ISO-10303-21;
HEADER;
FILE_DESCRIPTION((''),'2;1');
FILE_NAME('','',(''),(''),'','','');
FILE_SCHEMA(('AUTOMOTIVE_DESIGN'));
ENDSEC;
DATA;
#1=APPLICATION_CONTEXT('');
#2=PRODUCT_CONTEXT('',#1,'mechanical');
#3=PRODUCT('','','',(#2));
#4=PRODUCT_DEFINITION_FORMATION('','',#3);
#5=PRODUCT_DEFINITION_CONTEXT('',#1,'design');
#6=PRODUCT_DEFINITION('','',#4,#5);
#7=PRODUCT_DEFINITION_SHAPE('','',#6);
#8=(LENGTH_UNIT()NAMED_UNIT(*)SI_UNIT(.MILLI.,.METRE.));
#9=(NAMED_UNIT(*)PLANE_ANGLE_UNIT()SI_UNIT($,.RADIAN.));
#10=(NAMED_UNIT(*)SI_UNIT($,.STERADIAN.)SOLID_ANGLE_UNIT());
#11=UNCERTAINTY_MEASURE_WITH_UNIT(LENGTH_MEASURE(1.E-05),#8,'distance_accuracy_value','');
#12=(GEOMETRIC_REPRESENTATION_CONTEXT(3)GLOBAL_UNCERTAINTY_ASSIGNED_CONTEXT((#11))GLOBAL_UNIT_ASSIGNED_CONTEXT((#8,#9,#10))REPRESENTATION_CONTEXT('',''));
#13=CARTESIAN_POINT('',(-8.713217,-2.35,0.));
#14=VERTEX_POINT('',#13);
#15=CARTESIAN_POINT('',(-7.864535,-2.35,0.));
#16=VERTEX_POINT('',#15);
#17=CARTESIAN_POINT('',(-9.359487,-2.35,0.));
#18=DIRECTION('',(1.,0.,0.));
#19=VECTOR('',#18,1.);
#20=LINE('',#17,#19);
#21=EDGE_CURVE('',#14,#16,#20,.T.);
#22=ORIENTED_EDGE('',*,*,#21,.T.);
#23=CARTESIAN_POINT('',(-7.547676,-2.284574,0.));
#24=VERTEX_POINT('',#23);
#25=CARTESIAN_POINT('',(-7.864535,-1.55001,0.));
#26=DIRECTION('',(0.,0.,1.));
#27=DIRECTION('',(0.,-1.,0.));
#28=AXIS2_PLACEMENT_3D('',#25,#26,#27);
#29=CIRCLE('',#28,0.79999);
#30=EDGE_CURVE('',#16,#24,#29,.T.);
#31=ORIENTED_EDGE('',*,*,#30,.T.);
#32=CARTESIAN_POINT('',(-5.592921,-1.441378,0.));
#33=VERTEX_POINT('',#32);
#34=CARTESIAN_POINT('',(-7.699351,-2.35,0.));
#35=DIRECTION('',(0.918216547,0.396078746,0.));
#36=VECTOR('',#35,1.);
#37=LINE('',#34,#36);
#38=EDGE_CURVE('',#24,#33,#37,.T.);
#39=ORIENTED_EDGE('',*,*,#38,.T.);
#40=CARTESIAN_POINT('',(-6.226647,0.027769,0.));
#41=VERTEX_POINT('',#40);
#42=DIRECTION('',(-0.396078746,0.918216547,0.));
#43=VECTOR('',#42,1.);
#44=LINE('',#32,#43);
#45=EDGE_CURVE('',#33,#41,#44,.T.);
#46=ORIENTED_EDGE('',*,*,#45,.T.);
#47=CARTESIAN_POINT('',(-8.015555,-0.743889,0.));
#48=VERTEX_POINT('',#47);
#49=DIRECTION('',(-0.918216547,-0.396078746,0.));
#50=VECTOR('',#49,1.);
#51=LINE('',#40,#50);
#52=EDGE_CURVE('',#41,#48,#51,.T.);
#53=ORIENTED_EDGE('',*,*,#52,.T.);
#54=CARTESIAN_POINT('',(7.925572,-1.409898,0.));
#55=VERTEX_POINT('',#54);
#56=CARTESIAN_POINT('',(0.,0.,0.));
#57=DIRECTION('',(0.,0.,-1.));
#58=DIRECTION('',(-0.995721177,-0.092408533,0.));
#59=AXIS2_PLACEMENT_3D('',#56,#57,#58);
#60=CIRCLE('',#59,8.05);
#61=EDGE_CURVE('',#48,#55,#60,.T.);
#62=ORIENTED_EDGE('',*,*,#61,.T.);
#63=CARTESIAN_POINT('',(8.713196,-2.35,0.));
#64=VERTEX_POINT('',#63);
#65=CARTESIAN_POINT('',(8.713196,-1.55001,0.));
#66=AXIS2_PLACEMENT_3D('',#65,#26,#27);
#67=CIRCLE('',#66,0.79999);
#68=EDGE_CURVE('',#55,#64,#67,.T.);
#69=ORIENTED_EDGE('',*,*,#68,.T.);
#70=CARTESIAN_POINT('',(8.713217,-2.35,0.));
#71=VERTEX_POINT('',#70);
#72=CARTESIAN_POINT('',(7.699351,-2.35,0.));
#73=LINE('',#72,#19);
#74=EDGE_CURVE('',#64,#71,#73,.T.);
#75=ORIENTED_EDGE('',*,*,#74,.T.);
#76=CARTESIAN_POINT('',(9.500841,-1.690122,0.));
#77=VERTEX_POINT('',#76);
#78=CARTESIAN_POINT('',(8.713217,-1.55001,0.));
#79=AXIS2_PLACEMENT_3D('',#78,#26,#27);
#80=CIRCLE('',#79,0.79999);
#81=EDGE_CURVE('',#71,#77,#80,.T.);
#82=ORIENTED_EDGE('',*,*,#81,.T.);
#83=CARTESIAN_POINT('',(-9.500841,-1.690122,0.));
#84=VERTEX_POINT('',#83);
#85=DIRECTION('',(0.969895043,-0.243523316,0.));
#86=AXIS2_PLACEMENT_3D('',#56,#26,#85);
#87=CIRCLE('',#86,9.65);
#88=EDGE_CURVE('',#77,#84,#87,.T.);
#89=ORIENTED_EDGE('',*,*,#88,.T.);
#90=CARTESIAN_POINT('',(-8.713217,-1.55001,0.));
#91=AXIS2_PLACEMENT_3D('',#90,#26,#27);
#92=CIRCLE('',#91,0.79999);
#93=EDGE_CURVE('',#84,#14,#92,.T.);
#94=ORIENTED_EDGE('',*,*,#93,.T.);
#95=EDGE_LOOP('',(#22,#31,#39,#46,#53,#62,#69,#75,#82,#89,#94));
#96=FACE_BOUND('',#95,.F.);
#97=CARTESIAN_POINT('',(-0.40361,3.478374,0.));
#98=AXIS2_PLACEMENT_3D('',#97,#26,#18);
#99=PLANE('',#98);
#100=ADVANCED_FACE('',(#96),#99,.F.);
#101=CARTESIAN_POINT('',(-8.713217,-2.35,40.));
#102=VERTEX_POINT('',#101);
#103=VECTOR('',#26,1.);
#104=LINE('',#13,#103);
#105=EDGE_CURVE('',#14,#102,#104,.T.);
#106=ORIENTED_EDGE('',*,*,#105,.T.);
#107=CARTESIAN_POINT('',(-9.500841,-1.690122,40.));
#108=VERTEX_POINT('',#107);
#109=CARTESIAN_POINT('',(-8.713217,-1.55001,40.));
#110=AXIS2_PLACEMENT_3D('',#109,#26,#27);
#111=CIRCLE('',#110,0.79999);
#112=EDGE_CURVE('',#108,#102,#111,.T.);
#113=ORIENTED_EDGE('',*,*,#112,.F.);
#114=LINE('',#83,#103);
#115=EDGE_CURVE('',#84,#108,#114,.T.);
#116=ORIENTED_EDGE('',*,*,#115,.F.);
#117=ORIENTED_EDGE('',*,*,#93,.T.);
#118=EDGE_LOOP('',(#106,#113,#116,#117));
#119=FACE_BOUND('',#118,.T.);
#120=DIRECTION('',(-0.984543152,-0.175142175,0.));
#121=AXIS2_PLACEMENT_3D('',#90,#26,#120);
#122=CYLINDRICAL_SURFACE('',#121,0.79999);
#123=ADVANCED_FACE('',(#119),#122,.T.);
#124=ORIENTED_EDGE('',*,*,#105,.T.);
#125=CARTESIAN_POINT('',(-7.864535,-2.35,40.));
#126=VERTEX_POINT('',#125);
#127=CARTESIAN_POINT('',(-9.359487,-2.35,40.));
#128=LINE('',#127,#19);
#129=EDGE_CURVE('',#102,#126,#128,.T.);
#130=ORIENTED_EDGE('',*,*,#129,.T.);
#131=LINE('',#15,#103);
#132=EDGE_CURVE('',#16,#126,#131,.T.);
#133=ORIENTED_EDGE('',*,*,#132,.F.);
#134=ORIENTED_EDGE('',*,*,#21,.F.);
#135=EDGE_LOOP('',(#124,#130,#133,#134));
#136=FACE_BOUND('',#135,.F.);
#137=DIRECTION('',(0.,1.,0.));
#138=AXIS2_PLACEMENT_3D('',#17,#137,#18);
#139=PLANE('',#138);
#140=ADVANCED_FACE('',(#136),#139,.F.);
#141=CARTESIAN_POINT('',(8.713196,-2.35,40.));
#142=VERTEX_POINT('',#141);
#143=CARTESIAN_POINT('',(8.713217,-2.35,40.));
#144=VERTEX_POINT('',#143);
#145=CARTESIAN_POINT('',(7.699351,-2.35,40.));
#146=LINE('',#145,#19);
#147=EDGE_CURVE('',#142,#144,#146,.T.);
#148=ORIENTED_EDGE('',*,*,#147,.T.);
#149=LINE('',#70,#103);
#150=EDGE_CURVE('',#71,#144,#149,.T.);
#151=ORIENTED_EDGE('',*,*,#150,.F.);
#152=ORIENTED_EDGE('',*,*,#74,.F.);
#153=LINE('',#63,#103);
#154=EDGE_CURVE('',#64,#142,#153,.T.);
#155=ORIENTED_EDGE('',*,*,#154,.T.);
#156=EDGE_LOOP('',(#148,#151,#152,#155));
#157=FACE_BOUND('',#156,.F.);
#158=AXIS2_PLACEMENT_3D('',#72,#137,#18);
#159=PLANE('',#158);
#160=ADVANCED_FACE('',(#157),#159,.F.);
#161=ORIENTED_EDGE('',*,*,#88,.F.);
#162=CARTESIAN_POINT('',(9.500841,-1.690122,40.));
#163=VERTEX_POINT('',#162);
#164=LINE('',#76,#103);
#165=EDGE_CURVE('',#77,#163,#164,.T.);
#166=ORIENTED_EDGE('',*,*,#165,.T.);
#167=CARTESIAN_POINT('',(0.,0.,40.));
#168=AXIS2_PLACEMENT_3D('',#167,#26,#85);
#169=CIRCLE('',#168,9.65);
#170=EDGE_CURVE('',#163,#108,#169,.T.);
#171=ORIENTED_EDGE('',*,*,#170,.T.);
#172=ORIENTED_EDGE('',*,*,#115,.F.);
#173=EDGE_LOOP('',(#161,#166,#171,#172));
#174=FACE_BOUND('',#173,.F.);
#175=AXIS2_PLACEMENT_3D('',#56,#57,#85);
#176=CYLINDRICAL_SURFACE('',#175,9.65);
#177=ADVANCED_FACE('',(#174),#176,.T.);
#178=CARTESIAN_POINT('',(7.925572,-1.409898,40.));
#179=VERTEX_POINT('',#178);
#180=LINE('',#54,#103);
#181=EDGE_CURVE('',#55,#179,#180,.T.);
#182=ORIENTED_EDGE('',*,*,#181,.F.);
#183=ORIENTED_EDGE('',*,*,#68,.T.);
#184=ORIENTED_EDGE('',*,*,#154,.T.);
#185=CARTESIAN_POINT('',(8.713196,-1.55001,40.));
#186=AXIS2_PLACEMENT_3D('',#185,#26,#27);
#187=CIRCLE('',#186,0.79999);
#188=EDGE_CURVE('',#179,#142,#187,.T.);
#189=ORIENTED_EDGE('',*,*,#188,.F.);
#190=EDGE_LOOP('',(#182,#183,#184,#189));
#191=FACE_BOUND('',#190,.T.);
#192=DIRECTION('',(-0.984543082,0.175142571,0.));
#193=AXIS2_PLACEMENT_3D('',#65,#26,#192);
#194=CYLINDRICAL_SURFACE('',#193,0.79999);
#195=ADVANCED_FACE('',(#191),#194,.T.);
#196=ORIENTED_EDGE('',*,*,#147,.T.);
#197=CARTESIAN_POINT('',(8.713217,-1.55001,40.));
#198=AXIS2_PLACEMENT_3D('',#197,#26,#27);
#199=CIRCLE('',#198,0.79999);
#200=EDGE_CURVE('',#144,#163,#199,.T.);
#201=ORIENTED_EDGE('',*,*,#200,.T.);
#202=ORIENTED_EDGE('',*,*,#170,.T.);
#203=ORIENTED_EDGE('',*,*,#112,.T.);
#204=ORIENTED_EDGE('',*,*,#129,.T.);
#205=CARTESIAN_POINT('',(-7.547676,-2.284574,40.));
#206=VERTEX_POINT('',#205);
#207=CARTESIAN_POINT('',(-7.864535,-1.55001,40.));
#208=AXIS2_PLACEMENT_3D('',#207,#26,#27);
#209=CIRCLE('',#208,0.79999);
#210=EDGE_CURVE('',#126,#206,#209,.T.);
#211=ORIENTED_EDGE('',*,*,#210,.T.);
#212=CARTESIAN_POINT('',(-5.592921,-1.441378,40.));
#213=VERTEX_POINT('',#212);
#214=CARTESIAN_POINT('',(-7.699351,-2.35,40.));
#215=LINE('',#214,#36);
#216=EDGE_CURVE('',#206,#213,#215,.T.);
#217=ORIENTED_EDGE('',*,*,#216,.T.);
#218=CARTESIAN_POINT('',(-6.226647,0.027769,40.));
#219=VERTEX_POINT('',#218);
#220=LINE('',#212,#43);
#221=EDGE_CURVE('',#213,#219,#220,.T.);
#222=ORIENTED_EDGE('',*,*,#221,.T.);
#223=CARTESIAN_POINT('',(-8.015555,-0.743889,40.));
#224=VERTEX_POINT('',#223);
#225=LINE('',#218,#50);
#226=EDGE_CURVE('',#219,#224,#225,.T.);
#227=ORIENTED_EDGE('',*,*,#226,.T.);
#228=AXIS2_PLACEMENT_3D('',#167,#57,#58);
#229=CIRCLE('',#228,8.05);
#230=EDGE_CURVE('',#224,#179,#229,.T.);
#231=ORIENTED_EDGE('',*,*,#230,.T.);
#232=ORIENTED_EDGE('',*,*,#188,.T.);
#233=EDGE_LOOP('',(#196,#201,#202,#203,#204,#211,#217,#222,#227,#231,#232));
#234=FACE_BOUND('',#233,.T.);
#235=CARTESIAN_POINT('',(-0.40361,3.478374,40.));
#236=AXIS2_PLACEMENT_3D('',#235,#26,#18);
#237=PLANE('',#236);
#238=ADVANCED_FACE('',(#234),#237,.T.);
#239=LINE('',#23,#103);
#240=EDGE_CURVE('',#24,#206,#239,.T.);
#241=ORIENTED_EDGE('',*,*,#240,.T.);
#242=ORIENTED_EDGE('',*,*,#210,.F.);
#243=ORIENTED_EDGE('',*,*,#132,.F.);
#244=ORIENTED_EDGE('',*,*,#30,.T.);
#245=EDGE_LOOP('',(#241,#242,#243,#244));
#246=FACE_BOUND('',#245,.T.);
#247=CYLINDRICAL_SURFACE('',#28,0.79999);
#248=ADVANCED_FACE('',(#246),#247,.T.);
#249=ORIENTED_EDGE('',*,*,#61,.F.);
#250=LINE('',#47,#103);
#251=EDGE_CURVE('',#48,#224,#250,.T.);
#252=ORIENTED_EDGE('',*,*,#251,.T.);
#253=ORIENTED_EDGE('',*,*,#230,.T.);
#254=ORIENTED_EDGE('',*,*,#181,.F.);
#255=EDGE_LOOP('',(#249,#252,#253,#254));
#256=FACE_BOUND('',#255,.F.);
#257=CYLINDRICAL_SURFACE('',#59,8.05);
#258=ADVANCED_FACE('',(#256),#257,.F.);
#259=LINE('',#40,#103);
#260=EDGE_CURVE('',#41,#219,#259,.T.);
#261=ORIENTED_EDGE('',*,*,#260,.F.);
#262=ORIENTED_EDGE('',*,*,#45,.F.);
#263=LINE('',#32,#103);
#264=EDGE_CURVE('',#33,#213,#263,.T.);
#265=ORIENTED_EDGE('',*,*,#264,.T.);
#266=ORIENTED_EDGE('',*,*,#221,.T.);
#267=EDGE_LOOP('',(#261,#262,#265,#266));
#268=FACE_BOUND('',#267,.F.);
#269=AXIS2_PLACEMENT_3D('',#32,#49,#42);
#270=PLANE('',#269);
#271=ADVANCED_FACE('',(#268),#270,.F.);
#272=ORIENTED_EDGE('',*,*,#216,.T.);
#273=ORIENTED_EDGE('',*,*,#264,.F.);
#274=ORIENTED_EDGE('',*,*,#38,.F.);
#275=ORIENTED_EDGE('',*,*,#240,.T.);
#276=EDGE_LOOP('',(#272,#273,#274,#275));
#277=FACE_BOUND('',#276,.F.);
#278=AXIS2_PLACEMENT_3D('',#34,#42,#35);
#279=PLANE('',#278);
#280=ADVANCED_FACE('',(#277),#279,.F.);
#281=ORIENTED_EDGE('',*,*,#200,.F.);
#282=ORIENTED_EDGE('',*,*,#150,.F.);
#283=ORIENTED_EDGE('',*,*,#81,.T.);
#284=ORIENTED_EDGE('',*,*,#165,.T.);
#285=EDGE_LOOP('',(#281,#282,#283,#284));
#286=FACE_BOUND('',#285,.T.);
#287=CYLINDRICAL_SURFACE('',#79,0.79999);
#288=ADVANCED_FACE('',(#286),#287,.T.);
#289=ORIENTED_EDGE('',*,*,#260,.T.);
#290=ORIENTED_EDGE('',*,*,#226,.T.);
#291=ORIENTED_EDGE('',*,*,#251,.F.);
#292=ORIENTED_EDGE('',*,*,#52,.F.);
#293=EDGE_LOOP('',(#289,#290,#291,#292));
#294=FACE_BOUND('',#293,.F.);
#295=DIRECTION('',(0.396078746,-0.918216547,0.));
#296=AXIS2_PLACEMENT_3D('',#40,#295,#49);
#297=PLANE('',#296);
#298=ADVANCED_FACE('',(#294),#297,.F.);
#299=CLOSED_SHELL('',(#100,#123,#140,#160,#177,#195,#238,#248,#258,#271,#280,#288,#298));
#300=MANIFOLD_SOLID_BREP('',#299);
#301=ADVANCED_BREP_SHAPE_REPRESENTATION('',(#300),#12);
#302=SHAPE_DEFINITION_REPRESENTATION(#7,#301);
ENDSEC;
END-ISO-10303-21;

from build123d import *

# Parameters (mm, degrees)
F1_DEPTH = 40
F2_R     = 0.79999


# Not quite as in the source:
# - a fillet or chamfer is up to 0.001 mm smaller than in the source, because OpenCascade refuses the exact size


with BuildPart() as f1:
    # F0 (on Top) → F1 (new body)
    with BuildSketch(Plane.XY):
        with BuildLine():
            ThreePointArc((-8.0155554774, -0.7438886939), (0.8184709888, 8.008283539), (7.699350622, -2.35))
            Line((7.699350622, -2.35), (9.3594871654, -2.35))
            ThreePointArc((9.3594871654, -2.35), (0, 9.65), (-9.3594871654, -2.35))
            Line((-9.3594871654, -2.35), (-7.699350622, -2.35))
            Line((-7.699350622, -2.35), (-5.5929206907, -1.4413775962))
            Line((-5.5929206907, -1.4413775962), (-6.2266466845, 0.0277688788))
            Line((-6.2266466845, 0.0277688788), (-8.0155554774, -0.7438886939))
        make_face()
    extrude(amount=F1_DEPTH)

    # F2 (radius 0.8 in the source; OpenCascade refuses exactly that, so slightly less here)
    f2_edges = [f1.edges().sort_by_distance(p)[0] for p in [
        (-7.699351, -2.35, 20),
        (7.699351, -2.35, 20),
        (9.359487, -2.35, 20),
        (-9.359487, -2.35, 20),
    ]]
    fillet(f2_edges, radius=F2_R)


solid = f1.part
